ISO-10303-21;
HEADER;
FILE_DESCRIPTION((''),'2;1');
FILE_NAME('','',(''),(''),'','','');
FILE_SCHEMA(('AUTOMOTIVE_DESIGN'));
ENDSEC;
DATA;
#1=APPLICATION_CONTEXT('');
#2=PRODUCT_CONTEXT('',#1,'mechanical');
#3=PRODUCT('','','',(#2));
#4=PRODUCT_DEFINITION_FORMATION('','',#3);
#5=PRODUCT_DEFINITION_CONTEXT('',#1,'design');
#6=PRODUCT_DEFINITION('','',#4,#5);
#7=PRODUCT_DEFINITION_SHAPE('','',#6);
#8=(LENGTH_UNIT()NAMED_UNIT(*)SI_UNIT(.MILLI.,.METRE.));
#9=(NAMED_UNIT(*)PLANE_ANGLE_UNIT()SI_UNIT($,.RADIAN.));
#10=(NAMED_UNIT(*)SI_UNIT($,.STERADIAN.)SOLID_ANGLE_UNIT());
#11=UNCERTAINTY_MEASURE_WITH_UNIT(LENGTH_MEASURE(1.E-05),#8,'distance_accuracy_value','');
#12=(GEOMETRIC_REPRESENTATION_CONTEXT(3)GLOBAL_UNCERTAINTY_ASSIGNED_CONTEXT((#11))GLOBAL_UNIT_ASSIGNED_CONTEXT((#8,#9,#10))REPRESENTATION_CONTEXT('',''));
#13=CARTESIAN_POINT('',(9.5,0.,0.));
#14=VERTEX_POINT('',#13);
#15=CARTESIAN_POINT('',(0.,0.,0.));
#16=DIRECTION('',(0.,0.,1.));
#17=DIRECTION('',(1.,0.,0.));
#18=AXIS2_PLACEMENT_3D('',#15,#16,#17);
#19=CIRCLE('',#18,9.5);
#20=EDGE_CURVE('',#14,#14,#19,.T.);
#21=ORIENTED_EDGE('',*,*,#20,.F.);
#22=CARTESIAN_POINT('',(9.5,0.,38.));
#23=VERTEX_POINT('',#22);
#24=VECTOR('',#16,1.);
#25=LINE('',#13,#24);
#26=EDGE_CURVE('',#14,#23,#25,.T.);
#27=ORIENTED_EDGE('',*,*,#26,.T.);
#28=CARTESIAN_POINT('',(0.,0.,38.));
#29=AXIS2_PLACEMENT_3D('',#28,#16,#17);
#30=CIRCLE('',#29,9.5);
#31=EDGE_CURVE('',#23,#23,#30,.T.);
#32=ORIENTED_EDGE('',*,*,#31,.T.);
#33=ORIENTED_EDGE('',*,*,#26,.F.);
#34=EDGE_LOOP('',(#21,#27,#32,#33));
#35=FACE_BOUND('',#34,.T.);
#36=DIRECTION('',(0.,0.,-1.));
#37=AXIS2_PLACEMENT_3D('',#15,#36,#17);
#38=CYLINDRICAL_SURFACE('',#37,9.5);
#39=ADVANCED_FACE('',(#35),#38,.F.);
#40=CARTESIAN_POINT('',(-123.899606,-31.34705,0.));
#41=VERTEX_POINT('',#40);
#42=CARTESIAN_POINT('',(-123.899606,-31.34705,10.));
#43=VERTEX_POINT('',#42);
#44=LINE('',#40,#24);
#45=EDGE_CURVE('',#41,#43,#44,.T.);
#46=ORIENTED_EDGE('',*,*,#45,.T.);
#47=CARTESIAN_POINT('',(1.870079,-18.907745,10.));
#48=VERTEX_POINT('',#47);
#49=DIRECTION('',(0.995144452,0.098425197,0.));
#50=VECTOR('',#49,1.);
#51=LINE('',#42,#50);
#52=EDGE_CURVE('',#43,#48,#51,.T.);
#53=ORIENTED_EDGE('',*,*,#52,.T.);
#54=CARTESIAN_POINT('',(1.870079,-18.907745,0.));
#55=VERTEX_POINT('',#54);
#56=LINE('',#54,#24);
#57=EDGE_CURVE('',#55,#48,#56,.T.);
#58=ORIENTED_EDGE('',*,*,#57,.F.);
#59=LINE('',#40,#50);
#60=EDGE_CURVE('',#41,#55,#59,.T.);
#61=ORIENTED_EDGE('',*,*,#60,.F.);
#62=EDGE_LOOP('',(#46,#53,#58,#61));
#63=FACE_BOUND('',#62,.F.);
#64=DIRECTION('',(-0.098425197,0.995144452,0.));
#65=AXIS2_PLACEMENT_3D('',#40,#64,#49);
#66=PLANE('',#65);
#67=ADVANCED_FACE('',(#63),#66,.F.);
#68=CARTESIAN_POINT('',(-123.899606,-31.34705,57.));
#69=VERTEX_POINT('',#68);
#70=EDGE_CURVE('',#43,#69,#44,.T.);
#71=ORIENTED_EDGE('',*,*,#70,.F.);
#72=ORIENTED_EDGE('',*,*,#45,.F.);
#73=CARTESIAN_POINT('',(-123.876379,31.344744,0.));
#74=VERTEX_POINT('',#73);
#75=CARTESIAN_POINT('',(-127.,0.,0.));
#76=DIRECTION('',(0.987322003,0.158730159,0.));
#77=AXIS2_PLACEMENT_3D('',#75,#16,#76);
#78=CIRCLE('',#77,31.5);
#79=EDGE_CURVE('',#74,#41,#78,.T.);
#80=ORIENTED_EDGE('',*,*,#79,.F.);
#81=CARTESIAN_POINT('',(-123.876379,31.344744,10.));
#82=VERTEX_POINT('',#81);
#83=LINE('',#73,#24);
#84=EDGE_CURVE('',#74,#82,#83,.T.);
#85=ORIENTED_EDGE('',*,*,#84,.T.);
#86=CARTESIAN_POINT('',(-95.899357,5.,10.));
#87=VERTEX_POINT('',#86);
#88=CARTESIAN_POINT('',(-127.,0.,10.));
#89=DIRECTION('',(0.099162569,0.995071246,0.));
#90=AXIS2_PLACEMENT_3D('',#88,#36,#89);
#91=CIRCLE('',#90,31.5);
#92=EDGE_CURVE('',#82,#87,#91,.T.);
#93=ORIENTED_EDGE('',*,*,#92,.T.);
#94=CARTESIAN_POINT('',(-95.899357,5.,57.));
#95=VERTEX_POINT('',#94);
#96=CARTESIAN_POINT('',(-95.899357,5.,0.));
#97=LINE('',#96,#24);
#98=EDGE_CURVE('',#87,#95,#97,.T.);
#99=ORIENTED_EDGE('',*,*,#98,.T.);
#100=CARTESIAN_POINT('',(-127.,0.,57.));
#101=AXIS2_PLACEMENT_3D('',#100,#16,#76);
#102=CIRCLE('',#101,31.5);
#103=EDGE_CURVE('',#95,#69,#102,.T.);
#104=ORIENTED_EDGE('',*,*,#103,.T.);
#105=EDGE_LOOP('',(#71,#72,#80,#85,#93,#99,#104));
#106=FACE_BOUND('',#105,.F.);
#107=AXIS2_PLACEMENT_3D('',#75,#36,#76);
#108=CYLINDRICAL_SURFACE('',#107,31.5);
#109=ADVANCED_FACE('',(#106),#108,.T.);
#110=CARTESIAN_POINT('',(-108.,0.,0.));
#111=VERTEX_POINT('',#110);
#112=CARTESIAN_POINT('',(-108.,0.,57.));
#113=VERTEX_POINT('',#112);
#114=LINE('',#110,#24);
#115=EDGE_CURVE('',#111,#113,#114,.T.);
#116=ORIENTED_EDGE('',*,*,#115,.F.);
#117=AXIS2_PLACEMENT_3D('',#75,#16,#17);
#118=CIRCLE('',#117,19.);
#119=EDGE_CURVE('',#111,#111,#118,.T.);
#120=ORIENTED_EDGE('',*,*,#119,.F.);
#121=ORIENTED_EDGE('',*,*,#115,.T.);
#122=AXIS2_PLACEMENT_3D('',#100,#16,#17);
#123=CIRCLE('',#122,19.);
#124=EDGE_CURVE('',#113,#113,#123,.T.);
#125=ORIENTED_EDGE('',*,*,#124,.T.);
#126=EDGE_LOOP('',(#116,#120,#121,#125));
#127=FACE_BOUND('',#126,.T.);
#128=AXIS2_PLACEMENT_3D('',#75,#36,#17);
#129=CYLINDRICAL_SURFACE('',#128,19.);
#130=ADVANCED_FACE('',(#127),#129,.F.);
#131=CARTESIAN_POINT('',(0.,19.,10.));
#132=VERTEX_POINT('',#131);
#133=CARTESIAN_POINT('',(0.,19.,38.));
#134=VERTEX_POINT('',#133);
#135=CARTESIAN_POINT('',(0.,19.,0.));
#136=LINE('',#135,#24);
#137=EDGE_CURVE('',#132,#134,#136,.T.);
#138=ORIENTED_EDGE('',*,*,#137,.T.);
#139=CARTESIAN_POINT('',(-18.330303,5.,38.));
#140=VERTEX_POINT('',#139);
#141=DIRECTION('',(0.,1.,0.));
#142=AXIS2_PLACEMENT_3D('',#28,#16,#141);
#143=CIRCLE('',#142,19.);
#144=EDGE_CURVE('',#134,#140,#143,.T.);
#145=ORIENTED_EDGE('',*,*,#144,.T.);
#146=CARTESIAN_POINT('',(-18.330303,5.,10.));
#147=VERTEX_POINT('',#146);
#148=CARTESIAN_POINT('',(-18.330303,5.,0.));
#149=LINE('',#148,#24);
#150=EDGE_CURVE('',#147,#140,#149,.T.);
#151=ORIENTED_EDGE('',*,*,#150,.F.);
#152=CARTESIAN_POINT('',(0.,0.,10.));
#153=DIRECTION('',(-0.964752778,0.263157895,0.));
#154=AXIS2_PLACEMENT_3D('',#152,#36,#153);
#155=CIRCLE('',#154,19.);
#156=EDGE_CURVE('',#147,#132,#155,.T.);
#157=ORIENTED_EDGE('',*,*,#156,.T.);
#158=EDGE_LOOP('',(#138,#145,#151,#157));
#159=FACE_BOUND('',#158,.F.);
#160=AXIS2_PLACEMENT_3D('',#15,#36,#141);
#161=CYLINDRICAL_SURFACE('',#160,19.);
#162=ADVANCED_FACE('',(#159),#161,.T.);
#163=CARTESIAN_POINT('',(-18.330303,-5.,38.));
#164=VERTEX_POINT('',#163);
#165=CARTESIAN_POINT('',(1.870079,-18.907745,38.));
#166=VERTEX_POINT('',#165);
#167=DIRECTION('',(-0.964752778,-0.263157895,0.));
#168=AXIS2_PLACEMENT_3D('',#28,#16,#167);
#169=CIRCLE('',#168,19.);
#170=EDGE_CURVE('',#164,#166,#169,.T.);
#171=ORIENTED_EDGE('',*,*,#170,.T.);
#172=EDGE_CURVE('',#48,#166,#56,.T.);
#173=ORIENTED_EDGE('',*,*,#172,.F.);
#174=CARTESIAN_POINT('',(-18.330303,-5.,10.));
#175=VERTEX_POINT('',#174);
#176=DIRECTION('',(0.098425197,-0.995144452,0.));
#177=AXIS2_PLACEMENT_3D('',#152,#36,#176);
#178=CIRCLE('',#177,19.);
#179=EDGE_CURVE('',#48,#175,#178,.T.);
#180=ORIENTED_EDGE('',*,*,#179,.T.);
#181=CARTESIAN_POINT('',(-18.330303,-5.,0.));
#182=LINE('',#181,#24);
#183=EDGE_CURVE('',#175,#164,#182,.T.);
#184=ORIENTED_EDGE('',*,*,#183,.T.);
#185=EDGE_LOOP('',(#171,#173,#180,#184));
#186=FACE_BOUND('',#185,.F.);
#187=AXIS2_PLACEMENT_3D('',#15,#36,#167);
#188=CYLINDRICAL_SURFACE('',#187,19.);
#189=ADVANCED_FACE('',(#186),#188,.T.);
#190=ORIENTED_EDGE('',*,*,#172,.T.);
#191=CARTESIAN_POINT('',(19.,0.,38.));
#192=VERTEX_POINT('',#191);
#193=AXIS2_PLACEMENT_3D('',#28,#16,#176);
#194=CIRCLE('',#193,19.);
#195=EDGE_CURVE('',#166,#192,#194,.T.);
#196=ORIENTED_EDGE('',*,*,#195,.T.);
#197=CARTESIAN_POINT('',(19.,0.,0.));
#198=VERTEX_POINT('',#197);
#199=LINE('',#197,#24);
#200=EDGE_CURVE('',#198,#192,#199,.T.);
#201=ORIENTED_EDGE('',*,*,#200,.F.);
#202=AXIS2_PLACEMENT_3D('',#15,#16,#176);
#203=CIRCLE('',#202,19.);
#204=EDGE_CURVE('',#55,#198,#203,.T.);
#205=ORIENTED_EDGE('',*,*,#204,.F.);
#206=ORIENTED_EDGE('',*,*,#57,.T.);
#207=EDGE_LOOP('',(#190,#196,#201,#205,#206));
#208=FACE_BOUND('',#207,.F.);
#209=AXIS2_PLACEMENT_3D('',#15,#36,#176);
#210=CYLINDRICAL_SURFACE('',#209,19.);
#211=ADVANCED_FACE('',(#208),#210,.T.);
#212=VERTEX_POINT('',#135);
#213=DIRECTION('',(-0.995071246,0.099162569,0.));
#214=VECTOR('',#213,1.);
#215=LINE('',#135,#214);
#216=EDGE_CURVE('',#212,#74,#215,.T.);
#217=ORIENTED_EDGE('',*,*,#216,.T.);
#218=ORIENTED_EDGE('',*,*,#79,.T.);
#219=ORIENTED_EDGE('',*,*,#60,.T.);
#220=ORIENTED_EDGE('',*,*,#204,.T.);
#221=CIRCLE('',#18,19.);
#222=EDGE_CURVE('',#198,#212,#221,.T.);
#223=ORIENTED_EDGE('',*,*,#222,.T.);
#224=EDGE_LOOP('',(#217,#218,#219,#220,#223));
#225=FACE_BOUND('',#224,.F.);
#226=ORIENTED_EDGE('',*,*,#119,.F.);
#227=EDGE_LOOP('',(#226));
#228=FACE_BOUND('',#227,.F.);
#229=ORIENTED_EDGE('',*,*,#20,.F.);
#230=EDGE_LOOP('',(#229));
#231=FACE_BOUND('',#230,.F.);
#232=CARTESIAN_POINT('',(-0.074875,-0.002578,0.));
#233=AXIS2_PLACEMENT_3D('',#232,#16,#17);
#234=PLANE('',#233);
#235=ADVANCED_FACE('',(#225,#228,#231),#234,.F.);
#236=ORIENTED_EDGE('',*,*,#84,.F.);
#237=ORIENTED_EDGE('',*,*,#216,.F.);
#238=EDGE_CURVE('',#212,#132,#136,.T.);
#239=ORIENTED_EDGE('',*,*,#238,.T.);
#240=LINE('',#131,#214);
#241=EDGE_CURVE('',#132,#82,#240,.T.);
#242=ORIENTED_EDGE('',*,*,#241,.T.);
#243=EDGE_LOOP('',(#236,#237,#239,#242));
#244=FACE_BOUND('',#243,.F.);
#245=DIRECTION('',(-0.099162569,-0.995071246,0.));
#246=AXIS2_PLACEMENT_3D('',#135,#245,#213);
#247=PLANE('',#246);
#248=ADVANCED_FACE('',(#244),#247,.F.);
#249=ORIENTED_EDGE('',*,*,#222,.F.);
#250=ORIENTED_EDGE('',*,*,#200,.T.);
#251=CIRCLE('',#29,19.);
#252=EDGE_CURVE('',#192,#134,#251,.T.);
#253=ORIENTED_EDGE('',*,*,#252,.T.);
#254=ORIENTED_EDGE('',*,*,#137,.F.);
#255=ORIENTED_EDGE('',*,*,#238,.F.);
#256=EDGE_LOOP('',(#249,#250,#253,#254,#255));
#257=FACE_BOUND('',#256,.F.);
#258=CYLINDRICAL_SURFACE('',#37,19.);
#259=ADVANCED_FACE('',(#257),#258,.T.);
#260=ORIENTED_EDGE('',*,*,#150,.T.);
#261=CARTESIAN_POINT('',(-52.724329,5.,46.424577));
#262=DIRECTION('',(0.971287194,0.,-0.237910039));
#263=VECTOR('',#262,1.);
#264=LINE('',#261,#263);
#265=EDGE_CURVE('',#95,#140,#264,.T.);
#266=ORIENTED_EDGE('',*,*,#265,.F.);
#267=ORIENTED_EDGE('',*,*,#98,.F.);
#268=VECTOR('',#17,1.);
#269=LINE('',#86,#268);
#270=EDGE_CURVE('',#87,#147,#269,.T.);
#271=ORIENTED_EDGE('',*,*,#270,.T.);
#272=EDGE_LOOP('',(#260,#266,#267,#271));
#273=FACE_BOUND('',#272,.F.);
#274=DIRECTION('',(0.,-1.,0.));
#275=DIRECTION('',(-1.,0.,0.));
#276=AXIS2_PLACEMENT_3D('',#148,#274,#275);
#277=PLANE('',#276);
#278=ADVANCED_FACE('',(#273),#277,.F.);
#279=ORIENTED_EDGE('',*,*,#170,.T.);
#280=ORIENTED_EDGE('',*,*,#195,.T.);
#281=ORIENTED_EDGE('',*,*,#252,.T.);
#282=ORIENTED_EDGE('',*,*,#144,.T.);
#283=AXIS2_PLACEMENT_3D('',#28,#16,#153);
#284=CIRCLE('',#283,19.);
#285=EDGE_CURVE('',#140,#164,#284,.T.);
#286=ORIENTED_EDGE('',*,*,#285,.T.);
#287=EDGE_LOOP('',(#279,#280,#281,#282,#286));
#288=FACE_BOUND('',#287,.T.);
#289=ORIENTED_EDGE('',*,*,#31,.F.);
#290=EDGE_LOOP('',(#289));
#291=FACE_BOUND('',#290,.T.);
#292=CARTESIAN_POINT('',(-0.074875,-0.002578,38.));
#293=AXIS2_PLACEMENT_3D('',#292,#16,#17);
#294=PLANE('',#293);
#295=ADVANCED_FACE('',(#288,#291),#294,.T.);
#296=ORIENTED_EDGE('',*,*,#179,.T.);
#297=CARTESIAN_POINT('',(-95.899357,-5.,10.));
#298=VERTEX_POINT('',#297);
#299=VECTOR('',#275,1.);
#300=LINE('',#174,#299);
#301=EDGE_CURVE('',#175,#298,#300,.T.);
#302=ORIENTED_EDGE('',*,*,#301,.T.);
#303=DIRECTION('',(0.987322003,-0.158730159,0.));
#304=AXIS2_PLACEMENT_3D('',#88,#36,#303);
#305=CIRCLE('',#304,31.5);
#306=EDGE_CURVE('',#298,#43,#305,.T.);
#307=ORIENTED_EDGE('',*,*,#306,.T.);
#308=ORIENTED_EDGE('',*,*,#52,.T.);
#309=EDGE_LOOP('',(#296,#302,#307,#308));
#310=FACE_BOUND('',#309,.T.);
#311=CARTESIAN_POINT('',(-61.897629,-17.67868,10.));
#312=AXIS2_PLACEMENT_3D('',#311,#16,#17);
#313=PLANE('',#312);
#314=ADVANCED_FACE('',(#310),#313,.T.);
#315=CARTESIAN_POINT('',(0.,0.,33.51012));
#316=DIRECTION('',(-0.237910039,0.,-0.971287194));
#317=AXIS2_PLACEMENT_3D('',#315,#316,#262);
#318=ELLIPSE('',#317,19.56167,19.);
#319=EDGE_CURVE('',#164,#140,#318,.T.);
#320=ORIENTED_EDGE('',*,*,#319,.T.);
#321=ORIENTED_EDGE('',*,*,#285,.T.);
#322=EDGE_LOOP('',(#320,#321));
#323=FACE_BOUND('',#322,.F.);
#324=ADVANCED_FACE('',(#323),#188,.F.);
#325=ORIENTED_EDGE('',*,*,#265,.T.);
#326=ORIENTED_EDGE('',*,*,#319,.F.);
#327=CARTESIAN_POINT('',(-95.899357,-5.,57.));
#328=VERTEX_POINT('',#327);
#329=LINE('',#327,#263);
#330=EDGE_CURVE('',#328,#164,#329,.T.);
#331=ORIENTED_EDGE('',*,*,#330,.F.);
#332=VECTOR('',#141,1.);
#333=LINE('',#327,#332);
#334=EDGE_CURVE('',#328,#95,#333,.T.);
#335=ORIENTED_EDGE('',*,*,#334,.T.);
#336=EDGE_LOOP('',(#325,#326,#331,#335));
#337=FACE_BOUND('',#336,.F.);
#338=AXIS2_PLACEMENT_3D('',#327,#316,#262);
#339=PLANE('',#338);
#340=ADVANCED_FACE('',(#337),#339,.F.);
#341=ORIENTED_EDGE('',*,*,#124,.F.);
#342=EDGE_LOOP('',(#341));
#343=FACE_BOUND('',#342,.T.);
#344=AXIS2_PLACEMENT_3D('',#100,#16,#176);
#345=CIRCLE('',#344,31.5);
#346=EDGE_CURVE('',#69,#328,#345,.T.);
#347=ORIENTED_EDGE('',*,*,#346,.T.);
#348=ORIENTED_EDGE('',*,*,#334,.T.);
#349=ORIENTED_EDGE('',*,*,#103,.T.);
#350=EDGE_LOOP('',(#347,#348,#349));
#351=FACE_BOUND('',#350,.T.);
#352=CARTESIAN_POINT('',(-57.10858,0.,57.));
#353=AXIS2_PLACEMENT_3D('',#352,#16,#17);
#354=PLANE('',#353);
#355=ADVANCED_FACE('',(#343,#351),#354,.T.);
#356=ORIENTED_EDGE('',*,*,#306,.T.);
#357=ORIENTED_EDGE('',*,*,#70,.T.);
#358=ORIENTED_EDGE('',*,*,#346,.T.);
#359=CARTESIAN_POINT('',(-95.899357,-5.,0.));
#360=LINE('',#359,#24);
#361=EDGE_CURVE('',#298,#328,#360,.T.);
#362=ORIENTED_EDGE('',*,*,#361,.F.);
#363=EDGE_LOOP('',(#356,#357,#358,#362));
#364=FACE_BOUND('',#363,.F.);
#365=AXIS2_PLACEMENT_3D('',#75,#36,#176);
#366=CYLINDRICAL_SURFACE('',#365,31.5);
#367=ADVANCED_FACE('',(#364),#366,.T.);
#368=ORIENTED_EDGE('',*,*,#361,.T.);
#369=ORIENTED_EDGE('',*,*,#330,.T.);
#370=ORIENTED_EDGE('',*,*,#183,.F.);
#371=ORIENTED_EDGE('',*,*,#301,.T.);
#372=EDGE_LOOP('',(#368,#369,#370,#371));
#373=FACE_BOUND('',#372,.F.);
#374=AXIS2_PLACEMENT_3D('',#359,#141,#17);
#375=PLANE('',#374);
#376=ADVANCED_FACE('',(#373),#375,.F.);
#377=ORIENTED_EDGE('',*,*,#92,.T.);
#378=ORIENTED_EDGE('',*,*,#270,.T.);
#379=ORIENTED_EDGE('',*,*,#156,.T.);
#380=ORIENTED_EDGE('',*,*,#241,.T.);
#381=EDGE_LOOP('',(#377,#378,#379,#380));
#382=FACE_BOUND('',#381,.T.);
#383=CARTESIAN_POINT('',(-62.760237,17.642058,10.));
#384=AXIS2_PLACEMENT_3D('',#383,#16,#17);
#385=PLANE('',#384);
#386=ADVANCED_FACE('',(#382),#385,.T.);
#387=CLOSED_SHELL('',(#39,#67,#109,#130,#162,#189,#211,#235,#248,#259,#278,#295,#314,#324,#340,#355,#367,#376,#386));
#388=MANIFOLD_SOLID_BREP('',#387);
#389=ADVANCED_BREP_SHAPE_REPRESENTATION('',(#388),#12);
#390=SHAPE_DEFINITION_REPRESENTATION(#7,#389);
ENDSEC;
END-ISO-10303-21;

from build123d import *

# Parameters (mm, degrees)
F0_R     = 19
F1_DEPTH = 57
F2_DEPTH = 10
F0_R_2   = 9.5
F3_DEPTH = 38
F5_DEPTH = 57
F7_DEPTH = 36.501


with BuildPart() as f1:
    # F0 (on Top) → F1 (new body)
    with BuildSketch(Plane.XY):
        with BuildLine():
            ThreePointArc((-95.8993569198, 5), (-105.4051754039, 22.9328051198), (-123.8763790613, 31.3447442521))
            ThreePointArc((-123.8763790613, 31.3447442521), (-158.499997838, 0.011670713), (-123.8996062992, -31.3470502424))
            ThreePointArc((-123.8996062992, -31.3470502424), (-105.4136734635, -22.940804403), (-95.8993569198, -5))
            ThreePointArc((-95.8993569198, -5), (-95.5999979536, -2.50796162), (-95.5, 0))
            ThreePointArc((-95.5, 0), (-95.5999979536, 2.50796162), (-95.8993569198, 5))
        make_face()
        with Locations((-127, 0)):
            Circle(F0_R, mode=Mode.SUBTRACT)
    extrude(amount=F1_DEPTH)

    # F0 (on Top) → F2 (join)
    with BuildSketch(Plane.XY):
        with BuildLine():
            Line((-123.8996062992, -31.3470502424), (1.8700787402, -18.9077445907))
            ThreePointArc((1.8700787402, -18.9077445907), (-10.7745572419, -15.6495660081), (-18.3303027798, -5))
            Line((-18.3303027798, -5), (-95.8993569198, -5))
            ThreePointArc((-95.8993569198, -5), (-105.4136734635, -22.940804403), (-123.8996062992, -31.3470502424))
        make_face()
        with BuildLine():
            ThreePointArc((-18.3303027798, 5), (-11.5325625947, 15.0996688705), (0, 19))
            Line((0, 19), (-123.8763790613, 31.3447442521))
            ThreePointArc((-123.8763790613, 31.3447442521), (-105.4051754039, 22.9328051198), (-95.8993569198, 5))
            Line((-95.8993569198, 5), (-18.3303027798, 5))
        make_face()
    extrude(amount=F2_DEPTH)

    # F0 (on Top) → F3 (join)
    with BuildSketch(Plane.XY):
        with BuildLine():
            ThreePointArc((1.8700787402, -18.9077445907), (14.0806870582, -12.7567335932), (19, 0))
            ThreePointArc((19, 0), (13.4350288425, 13.4350288425), (0, 19))
            ThreePointArc((0, 19), (-11.5325625947, 15.0996688705), (-18.3303027798, 5))
            ThreePointArc((-18.3303027798, 5), (-19, 0), (-18.3303027798, -5))
            ThreePointArc((-18.3303027798, -5), (-10.7745572419, -15.6495660081), (1.8700787402, -18.9077445907))
        make_face()
        Circle(F0_R_2, mode=Mode.SUBTRACT)
    extrude(amount=F3_DEPTH)

    # F0 (on Top) → F5 (join)
    with BuildSketch(Plane.XY):
        with BuildLine():
            ThreePointArc((-18.3303027798, -5), (-19, 0), (-18.3303027798, 5))
            Line((-18.3303027798, 5), (-95.8993569198, 5))
            ThreePointArc((-95.8993569198, 5), (-95.5999979536, 2.50796162), (-95.5, 0))
            ThreePointArc((-95.5, 0), (-95.5999979536, -2.50796162), (-95.8993569198, -5))
            Line((-95.8993569198, -5), (-18.3303027798, -5))
        make_face()
    extrude(amount=F5_DEPTH)

    # F6 (on face) → F7 (cut, through all)
    with BuildSketch(Plane.XZ.offset(5)):
        Polygon((-18.3303027798, 57), (-95.8993569198, 57), (-18.3303027798, 38), align=None)
    extrude(amount=-F7_DEPTH, mode=Mode.SUBTRACT)


solid = f1.part
